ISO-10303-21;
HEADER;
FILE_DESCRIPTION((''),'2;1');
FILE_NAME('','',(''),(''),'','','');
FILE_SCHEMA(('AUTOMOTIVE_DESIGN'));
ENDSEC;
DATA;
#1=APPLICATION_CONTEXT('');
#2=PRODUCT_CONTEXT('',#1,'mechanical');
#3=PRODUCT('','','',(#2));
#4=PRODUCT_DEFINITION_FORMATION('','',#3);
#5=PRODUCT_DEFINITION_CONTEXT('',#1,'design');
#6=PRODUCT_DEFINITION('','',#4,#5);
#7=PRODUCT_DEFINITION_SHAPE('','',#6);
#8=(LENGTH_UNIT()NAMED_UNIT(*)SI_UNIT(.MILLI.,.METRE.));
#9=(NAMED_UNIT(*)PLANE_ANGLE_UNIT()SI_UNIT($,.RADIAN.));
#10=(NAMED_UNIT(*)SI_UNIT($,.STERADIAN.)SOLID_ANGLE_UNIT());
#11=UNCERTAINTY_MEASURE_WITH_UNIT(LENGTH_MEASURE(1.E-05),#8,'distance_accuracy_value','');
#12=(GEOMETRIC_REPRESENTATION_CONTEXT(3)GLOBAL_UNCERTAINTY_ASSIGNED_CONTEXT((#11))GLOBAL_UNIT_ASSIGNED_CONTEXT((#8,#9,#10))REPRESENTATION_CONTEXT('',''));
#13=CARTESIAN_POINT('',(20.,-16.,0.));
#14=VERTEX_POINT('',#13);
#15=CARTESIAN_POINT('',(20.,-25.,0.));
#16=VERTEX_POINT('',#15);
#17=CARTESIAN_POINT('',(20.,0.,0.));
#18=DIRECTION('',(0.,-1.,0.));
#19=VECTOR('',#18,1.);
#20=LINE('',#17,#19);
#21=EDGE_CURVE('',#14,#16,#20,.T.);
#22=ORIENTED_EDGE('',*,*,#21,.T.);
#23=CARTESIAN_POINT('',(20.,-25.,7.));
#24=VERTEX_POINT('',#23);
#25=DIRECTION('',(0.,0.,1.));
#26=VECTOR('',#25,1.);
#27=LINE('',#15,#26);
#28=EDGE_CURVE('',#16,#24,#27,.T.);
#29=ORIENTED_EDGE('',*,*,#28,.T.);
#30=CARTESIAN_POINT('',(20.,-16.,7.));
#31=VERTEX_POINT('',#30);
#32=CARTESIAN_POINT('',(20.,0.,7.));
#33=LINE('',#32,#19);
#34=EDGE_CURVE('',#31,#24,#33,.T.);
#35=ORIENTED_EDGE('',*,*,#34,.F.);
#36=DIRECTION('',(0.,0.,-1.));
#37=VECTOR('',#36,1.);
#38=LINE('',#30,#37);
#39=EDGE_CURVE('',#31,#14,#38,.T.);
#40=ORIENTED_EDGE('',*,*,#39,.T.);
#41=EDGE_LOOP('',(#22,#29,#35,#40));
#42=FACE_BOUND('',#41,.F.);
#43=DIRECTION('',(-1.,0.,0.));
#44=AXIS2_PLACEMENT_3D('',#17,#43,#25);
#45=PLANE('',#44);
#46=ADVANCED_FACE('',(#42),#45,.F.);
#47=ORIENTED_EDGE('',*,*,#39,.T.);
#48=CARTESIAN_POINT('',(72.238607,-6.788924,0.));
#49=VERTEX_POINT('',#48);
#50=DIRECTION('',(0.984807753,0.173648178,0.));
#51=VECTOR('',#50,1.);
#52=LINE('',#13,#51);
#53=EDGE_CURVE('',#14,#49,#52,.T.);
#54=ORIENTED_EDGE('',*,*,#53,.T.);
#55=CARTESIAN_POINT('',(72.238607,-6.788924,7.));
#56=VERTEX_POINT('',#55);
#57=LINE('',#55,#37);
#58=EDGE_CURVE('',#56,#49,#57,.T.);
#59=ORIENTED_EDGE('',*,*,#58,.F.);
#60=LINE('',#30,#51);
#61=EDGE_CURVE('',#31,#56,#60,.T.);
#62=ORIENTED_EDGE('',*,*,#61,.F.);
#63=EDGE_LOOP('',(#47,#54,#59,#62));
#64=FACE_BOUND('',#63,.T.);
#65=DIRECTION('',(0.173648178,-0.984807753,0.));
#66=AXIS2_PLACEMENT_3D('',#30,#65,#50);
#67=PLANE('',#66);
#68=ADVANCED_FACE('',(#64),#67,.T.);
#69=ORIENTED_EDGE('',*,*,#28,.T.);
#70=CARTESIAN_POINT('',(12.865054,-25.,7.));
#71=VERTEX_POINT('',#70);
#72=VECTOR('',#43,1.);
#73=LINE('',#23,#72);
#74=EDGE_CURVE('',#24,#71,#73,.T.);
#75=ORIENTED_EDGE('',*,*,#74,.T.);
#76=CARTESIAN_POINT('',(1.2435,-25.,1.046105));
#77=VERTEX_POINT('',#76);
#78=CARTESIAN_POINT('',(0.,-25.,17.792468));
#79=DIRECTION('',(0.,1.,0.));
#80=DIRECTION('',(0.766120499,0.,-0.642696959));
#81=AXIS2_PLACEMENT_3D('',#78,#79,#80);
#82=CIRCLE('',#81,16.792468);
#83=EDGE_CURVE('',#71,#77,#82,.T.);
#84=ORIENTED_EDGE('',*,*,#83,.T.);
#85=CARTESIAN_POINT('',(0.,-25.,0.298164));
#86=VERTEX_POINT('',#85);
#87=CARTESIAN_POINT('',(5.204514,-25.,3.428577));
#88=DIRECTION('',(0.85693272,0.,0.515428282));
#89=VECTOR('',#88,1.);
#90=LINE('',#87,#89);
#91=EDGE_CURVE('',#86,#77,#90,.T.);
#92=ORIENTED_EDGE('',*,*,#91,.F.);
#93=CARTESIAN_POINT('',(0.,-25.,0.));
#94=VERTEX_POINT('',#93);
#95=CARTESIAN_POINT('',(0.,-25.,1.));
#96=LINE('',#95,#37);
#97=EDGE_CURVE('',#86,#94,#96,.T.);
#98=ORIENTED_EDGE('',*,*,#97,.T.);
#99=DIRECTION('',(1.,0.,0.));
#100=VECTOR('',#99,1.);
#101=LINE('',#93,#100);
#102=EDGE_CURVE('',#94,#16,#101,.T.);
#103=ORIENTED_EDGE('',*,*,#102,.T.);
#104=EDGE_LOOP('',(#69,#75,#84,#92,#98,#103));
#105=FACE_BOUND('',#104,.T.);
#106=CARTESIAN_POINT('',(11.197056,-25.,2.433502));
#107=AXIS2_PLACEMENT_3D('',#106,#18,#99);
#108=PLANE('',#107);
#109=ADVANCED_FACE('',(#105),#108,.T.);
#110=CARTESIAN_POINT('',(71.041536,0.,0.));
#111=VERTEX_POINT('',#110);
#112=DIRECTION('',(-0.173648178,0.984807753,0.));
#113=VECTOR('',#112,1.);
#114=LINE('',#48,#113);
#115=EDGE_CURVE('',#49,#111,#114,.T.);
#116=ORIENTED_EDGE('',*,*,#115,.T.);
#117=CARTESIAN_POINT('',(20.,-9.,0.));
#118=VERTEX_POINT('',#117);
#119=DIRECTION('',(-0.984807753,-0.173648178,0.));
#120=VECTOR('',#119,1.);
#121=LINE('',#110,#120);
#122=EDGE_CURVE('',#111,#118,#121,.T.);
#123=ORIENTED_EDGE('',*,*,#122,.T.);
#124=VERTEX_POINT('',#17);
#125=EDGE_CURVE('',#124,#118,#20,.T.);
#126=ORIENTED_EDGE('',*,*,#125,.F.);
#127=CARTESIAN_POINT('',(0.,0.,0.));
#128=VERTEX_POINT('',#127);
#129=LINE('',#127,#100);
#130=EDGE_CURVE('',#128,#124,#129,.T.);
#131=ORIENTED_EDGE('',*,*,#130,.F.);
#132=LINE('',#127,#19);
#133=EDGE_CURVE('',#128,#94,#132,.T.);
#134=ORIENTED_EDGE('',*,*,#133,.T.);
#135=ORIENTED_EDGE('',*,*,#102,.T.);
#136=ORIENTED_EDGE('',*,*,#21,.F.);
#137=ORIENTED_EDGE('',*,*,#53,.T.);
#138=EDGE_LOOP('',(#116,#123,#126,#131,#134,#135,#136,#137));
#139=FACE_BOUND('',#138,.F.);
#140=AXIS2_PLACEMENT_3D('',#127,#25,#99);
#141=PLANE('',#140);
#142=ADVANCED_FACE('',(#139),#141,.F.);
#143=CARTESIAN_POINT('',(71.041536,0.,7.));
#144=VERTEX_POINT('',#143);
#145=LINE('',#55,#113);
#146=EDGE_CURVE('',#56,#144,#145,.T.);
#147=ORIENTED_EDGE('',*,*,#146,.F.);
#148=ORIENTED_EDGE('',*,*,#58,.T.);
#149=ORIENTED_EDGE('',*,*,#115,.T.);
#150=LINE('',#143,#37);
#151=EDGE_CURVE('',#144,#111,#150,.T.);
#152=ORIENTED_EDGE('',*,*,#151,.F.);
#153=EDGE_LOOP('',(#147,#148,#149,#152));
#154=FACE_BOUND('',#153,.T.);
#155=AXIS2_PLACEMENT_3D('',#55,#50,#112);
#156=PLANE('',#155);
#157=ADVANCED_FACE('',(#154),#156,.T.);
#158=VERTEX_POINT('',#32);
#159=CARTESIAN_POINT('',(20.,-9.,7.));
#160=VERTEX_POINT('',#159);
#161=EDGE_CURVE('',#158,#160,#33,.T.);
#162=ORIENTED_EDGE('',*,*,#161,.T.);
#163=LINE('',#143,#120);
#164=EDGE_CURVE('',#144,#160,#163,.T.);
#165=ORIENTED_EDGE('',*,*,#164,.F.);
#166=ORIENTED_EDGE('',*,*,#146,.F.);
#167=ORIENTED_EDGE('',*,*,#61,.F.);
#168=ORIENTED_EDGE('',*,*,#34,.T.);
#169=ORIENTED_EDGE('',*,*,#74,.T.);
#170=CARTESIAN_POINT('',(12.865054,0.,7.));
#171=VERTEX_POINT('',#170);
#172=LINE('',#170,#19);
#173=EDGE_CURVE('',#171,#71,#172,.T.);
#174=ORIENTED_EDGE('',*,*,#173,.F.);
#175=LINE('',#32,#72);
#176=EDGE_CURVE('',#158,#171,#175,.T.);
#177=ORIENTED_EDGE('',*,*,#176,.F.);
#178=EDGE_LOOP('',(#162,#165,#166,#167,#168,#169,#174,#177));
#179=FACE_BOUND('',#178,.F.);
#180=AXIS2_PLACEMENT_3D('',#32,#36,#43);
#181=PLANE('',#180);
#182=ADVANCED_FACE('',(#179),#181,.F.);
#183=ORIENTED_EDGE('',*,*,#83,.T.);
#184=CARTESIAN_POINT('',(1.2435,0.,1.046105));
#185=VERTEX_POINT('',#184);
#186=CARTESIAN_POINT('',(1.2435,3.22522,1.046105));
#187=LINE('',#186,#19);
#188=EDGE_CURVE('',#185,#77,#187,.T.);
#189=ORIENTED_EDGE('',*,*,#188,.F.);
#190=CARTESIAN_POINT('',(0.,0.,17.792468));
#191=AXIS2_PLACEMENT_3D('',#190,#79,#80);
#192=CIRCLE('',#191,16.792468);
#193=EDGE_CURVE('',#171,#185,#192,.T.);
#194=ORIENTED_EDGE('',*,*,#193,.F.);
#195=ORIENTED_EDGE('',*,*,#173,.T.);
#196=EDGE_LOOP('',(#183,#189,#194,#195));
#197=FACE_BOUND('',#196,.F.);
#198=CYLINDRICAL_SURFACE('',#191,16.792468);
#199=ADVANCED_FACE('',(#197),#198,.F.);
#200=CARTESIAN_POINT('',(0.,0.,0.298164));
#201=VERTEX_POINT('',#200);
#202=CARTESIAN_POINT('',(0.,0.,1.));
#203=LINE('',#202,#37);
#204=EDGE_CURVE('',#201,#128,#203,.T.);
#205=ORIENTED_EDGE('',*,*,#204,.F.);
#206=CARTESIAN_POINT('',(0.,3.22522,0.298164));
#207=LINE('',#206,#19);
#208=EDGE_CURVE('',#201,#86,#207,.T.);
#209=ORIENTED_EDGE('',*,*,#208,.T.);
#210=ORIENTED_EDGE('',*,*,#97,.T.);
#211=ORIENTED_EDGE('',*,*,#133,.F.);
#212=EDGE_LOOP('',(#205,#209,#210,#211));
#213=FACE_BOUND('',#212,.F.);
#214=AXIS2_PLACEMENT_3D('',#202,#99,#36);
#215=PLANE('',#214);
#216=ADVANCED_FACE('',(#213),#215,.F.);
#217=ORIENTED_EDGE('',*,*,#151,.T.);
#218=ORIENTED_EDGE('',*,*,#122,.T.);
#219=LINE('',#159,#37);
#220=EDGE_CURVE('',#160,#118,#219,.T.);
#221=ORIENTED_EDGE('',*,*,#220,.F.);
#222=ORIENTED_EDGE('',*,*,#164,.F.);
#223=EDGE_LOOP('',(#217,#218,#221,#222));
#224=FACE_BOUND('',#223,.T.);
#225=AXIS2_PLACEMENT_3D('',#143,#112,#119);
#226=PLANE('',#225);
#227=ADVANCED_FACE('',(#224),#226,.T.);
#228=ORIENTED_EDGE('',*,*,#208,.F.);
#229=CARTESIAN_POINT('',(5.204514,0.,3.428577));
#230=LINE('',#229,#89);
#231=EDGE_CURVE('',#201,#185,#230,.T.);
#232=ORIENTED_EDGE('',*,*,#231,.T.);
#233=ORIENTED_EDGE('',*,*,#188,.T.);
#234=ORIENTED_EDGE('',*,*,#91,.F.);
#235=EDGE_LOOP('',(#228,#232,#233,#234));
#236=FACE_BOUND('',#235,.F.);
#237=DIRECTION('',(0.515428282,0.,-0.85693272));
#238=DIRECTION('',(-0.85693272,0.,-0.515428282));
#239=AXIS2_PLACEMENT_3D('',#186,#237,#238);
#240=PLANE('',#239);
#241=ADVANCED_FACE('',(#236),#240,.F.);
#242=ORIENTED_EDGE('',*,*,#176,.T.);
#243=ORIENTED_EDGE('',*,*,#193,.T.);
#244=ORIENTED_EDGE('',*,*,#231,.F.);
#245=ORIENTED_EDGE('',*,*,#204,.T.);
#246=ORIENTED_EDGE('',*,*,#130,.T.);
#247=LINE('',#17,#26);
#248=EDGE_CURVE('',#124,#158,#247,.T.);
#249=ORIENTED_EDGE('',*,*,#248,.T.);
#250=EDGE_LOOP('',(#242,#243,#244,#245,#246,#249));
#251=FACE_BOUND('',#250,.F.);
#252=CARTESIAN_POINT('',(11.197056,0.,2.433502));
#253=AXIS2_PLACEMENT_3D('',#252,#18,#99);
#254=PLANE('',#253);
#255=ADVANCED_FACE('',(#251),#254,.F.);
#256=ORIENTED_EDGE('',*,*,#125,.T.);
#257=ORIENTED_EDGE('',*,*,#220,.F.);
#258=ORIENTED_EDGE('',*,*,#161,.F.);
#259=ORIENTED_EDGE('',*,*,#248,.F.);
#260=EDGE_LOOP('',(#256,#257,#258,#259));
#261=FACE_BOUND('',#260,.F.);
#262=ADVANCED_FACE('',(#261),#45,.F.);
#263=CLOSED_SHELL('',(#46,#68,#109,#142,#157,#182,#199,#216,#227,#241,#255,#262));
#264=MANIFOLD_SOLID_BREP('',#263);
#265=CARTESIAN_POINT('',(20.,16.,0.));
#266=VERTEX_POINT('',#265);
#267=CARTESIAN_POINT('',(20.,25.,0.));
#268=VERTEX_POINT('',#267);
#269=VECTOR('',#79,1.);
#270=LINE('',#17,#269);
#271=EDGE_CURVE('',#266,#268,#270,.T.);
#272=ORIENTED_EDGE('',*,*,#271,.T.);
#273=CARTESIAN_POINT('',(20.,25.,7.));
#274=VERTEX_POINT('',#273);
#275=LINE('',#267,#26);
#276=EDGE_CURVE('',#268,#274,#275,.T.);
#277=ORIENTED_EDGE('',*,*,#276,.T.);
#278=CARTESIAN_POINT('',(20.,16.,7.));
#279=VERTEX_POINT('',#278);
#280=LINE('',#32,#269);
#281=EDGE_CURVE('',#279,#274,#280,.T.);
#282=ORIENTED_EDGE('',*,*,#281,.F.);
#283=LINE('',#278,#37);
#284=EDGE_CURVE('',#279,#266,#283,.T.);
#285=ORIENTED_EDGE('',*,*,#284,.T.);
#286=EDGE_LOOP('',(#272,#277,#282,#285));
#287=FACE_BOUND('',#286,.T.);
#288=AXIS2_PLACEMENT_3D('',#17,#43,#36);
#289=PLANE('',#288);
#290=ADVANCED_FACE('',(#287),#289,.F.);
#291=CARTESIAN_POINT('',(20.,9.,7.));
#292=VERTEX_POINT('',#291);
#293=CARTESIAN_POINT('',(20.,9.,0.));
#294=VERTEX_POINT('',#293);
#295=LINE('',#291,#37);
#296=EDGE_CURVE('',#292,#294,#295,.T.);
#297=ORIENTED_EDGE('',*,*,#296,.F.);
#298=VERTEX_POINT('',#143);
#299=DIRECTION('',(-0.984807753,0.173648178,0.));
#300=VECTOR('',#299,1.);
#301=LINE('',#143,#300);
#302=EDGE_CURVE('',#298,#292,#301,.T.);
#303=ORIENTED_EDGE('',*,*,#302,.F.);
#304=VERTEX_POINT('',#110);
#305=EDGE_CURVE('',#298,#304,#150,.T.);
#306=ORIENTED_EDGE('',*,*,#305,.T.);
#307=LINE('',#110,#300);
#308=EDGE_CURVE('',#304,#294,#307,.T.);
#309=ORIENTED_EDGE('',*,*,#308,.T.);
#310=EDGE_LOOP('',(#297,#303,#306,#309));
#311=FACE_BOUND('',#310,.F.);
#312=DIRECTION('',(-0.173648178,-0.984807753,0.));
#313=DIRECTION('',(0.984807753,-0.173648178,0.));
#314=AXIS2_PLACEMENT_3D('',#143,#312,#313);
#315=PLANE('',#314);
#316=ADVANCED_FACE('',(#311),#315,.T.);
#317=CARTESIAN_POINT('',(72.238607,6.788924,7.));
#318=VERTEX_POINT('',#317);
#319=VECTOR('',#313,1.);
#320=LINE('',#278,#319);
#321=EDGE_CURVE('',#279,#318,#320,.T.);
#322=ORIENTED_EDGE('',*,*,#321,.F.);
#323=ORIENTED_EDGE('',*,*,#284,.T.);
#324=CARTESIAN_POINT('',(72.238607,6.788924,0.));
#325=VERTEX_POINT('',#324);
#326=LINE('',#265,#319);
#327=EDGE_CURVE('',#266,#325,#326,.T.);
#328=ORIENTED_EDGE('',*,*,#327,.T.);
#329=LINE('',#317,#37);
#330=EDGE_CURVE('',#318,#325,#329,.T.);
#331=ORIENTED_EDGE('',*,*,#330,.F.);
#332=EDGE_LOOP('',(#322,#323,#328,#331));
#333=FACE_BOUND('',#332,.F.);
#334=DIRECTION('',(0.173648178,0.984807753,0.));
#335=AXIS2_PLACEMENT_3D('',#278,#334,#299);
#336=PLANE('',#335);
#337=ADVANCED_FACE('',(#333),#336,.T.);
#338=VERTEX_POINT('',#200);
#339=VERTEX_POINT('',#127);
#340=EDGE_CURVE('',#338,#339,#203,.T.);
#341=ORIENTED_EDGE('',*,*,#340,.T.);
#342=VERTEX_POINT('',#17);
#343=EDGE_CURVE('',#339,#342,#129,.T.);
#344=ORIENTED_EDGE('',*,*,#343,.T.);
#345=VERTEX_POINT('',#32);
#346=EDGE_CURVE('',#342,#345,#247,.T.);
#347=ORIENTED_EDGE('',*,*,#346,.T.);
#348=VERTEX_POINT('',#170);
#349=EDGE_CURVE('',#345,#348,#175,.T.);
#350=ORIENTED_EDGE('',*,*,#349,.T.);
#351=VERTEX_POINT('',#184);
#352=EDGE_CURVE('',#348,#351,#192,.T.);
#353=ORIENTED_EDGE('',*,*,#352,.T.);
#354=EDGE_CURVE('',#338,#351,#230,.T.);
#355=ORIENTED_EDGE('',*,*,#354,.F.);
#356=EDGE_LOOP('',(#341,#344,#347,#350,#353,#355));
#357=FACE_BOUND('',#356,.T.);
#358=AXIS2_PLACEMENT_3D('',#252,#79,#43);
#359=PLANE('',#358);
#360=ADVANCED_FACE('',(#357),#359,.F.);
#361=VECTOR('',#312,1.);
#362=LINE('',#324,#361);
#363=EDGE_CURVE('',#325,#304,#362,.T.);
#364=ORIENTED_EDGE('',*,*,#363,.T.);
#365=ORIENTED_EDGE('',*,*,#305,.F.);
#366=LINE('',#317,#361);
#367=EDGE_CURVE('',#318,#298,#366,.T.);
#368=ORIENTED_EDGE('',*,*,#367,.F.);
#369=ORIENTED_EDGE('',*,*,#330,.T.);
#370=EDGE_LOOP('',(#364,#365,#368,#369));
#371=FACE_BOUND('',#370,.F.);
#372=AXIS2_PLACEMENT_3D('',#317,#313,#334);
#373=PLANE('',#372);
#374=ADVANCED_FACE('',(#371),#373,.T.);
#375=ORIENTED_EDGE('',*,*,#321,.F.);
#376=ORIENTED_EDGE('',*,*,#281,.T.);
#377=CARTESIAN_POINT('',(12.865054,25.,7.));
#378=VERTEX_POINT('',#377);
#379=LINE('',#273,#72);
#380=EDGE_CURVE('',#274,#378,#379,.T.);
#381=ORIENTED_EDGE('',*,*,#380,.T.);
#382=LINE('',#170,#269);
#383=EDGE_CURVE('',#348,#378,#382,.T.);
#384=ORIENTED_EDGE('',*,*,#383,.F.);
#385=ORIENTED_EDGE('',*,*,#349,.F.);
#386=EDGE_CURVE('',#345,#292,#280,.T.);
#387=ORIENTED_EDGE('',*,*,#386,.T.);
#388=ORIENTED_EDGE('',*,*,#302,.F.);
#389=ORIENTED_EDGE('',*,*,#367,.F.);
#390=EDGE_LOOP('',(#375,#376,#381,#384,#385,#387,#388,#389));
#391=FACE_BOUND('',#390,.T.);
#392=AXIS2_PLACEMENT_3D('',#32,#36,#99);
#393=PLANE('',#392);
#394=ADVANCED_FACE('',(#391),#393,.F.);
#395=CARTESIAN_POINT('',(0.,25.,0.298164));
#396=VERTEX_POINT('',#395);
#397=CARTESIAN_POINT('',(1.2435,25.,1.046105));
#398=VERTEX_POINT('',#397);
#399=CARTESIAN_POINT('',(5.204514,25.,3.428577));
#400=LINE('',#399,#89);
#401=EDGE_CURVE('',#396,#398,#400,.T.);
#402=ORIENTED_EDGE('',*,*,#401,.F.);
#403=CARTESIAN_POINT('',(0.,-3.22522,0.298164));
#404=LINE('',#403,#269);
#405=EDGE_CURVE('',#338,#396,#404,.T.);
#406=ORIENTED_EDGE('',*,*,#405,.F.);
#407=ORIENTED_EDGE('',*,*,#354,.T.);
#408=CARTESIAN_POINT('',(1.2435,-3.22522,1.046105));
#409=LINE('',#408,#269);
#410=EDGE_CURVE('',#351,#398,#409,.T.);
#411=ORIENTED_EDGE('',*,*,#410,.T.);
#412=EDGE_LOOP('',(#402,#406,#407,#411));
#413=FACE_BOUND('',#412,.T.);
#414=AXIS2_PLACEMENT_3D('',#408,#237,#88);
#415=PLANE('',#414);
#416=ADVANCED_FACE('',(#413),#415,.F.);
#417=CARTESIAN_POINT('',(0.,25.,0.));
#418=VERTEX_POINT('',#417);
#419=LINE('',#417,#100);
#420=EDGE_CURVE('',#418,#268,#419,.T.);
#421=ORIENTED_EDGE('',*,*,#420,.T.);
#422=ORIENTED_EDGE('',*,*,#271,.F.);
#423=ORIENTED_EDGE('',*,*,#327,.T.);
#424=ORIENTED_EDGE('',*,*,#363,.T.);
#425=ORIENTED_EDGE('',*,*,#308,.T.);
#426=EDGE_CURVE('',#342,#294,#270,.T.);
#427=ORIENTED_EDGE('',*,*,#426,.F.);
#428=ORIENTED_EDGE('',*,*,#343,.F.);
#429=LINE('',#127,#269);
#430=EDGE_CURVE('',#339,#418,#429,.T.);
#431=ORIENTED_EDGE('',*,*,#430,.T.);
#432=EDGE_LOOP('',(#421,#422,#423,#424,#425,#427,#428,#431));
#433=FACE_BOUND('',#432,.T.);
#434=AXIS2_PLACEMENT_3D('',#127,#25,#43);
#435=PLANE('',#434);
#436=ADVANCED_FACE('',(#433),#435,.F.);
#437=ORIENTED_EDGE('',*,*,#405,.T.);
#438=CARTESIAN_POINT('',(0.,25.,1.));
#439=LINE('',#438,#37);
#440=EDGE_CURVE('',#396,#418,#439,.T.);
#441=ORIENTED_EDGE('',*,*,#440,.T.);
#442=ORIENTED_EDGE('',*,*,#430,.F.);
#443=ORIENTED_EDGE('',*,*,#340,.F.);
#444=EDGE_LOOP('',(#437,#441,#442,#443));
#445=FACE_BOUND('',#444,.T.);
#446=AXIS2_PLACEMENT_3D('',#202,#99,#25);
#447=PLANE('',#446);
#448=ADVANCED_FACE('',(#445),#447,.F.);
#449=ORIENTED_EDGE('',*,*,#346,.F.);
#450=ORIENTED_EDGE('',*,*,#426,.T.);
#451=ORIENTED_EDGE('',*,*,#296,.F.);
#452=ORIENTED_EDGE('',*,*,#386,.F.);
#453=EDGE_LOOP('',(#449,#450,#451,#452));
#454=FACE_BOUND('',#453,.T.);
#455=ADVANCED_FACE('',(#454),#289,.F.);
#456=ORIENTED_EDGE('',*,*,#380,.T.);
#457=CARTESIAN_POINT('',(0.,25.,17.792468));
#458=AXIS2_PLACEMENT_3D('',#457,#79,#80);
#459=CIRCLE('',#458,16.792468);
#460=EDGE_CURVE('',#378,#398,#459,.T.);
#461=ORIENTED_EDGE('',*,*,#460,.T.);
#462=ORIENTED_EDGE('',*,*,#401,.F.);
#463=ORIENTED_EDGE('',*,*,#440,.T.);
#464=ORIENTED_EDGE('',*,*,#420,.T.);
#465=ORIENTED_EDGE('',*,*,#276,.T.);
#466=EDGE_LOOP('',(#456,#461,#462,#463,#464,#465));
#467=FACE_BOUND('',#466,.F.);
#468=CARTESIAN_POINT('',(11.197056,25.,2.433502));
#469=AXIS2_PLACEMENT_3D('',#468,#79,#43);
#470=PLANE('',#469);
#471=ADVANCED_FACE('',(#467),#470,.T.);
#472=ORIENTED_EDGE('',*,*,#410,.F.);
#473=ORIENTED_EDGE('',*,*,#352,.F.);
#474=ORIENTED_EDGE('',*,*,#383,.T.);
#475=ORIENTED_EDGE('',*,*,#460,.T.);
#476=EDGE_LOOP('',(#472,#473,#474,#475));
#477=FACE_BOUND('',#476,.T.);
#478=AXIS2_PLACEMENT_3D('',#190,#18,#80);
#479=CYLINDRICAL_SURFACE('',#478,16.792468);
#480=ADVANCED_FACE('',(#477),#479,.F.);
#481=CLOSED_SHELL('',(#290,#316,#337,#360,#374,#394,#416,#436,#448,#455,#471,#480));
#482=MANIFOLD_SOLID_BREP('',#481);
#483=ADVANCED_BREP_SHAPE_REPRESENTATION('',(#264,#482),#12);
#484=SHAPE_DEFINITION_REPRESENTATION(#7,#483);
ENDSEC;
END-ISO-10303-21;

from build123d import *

# Parameters (mm, degrees)
F1_DEPTH    = 25
F2_T1_DEPTH = 31.4504398491
F4_DEPTH    = 7


# Not quite as in the source:
# - a fillet or chamfer that OpenCascade refuses, or shapes differently, is made with other operations: its cross-section is extruded or revolved along the edge and cut away or added


with BuildPart() as f1:
    # F0 (on Front) → F1 (new body)
    with BuildSketch(Plane.XZ):
        with BuildLine():
            Line((0, 1), (0, 0))
            Line((0, 0), (20, 0))
            Line((20, 0), (20, 7))
            Line((20, 7), (12.8650542249, 7))
            ThreePointArc((12.8650542249, 7), (7.09770421, 2.5737434285), (0, 1))
        make_face()
    extrude(amount=F1_DEPTH)

    # F2: chamfer of 0.75 x 1.2990381057 on 1 edges, made by hand

    # F2_s2 → F2_t1 (cut)
    with BuildSketch(Plane.XZ.offset(-3.2252199245)):
        with BuildLine():
            Line((1.2434998223, 1.0461045215), (0, 0.2981636822))
            Line((0, 0.2981636822), (0, 1))
            ThreePointArc((0, 1), (0.6449381871, 1.0123894461), (1.2434998223, 1.0461045215))
        make_face()
    extrude(amount=F2_T1_DEPTH, mode=Mode.SUBTRACT)

    # F3 (on face) → F4 (join, through all)
    with BuildSketch(Plane.XY.offset(7)):
        Polygon((71.0415363766, 0), (20, -9), (20, -16), (72.2386068782, -6.7889241728), align=None)
    extrude(amount=-F4_DEPTH)


with BuildPart() as f5_1:
    # F5: instance of F1
    add(f1.part.mirror(Plane.XZ))


solid = Compound([f1.part, f5_1.part])
